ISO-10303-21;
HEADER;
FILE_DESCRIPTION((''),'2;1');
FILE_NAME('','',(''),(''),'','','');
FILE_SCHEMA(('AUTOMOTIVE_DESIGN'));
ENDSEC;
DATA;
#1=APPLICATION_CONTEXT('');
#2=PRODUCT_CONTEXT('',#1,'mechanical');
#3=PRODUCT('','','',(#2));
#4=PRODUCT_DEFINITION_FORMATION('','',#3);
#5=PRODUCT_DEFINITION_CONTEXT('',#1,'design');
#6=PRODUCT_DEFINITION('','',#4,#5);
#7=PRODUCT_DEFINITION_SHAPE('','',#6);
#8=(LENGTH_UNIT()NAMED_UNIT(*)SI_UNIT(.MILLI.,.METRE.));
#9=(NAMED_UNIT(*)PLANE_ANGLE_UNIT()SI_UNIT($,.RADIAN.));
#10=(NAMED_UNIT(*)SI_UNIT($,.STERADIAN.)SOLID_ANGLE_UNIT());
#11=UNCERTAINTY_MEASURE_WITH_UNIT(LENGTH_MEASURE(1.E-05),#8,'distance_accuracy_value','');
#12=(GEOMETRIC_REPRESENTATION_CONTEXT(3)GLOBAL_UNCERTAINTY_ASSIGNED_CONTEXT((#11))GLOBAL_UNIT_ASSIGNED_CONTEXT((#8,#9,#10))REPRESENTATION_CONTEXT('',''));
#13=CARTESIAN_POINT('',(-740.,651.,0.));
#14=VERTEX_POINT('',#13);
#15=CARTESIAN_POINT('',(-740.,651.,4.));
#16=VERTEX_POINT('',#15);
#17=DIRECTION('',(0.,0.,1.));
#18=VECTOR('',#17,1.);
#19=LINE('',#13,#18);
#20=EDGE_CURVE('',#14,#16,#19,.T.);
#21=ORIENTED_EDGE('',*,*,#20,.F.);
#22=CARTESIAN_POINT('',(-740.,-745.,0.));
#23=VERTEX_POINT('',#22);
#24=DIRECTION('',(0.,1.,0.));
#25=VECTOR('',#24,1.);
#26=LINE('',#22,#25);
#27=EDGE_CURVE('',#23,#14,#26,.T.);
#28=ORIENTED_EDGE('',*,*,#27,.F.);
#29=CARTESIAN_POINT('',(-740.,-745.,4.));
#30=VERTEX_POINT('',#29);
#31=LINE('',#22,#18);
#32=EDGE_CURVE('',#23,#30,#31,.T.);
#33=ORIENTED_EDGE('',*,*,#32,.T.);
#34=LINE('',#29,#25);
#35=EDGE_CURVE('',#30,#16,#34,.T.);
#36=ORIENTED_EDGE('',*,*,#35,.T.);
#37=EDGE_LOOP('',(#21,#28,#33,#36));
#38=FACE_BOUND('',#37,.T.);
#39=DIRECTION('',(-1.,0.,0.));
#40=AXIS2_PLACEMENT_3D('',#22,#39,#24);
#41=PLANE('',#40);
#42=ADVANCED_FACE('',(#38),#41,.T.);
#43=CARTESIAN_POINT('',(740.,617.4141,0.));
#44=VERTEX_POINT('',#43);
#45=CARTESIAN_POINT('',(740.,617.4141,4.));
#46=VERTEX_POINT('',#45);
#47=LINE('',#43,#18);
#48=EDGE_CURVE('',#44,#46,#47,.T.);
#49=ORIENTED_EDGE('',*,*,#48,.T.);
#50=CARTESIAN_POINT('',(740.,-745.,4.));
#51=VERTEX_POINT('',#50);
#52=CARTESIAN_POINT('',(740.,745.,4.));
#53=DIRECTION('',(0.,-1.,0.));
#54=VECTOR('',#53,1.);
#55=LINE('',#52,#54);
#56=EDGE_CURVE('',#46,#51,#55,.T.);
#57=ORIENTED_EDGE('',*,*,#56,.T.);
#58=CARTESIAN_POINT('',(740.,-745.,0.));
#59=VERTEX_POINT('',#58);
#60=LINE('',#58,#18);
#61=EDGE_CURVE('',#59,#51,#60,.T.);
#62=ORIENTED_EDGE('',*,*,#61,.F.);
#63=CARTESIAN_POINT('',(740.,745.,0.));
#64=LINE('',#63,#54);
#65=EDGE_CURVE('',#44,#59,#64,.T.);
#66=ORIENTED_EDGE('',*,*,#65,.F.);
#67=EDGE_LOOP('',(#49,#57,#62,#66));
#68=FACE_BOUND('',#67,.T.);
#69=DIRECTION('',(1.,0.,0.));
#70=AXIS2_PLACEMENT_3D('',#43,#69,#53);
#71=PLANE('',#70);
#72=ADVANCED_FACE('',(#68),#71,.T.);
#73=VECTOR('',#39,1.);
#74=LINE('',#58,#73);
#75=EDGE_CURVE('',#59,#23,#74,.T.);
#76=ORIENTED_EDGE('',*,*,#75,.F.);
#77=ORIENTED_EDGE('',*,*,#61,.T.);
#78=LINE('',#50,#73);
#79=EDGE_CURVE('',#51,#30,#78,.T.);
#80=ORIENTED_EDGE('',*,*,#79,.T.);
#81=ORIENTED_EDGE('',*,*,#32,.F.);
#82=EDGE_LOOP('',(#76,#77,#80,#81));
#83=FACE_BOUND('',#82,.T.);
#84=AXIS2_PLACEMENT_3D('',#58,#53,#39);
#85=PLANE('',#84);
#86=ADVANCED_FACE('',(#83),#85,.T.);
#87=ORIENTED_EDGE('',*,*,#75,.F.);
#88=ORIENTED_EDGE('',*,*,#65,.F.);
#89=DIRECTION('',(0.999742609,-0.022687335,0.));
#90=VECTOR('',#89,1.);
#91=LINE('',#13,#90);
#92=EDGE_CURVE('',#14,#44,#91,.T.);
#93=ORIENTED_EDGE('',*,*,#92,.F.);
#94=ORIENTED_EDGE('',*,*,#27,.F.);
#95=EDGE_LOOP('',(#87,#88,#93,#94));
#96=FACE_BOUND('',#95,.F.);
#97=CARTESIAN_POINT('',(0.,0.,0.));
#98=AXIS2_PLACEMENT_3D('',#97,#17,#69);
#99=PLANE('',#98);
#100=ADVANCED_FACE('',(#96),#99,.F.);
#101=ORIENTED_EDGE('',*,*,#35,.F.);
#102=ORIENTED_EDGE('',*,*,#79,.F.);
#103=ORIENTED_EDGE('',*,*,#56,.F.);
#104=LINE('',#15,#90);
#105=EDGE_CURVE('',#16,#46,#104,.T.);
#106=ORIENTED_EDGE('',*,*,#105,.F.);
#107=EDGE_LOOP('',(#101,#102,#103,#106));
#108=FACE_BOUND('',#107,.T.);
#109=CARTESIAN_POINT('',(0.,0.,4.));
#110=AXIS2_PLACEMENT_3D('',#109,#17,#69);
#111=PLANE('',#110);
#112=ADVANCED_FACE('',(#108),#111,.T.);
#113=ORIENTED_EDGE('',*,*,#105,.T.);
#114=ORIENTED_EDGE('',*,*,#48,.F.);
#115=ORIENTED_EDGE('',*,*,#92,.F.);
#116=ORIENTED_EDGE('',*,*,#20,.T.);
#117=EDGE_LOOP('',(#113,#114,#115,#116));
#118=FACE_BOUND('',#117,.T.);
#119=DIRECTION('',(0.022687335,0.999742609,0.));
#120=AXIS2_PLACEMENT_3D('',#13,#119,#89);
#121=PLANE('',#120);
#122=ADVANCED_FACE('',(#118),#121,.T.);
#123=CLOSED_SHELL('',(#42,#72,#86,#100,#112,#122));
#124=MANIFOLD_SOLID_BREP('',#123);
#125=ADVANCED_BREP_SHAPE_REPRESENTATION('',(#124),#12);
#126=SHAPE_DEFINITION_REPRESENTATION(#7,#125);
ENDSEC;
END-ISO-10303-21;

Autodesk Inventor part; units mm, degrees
ref_plane "YZ Plane" through (0, 0, 0) normal (1, 0, 0) x (0, 1, 0)
ref_plane "XZ Plane" through (0, 0, 0) normal (0, 1, 0) x (-1, 0, 0)
ref_plane "XY Plane" through (0, 0, 0) normal (0, 0, 1) x (1, 0, 0)
sketch "Sketch1" plane through (0, 0, 0) normal (0, 0, 1) x (1, 0, 0)
  line L0 (740, -745) -> (-740, -745)
  line L1 (-740, -745) -> (-740, 745)
  line L2 (-740, 745) -> (740, 745)
  line L3 (740, 745) -> (740, -745)
  line L4 (740, -745) -> (-740, 745) construction
  line L5 (-740, -745) -> (740, 745) construction
  line L6 (-740, 651) -> (740, 617.4141)
  point P0 (0, 0)
  dimension "d0" = 1480
  dimension "d1" = 1490
  dimension "d3" = 1.3
  dimension "d6" = 1396
extrude "Plate1" add sketch "Sketch1" along normal blind 4 contours L0 L1 L6 L3
sketch "Sketch2" plane through (0, 0, 0) normal (0, 0, -1) x (-1, 0, 0)
  line L0 (499.781, -578.4604) -> (499.781, -902.2727) construction
  line L1 (499.781, -902.2727) -> (469.8587, -902.2727) construction
  line L2 (469.8587, -902.2727) -> (469.8587, -578.4604) construction
  line L3 (469.8587, -578.4604) -> (499.781, -578.4604) construction
  point P0 (0, 0)
mark "Mark1"
sketch "Эскиз3" plane through (0, 0, 0) normal (0, 0, -1) x (-1, 0, 0)
  line L0 (710, -489.5) -> (770, -489.5) projected
  line L1 (710, -489.5) -> (710, -485.5) projected
  line L2 (710, 7.1667) -> (770, 7.1667) projected
  line L3 (710, 7.1667) -> (710, 11.1667) projected
  line L4 (710, 503.8333) -> (770, 503.8333) projected
  line L5 (710, 503.8333) -> (710, 507.8333) projected
  line L6 (669.8628, -493) -> (669.8628, -590) projected
  line L7 (669.8628, -590) -> (665.8638, -590) projected
  line L8 (169.7342, -493) -> (169.7342, -590) projected
  line L9 (169.7342, -590) -> (165.7352, -590) projected
  line L10 (-330.3944, -493) -> (-330.3944, -590) projected
  line L11 (-330.3944, -590) -> (-334.3934, -590) projected
  line L12 (-738.6395, -489.5) -> (-680, -489.5) projected
  line L13 (-680, -489.5) -> (-680, -485.5) projected
  line L14 (-738.6395, 7.1667) -> (-680, 7.1667) projected
  line L15 (-680, 7.1667) -> (-680, 11.1667) projected
  line L16 (-738.6395, 503.8333) -> (-680, 503.8333) projected
  line L17 (-680, 503.8333) -> (-680, 507.8333) projected
  line L18 (169.7342, 715) -> (169.7342, 511.3333) projected
  line L19 (-330.3944, 715) -> (-330.3944, 511.3333) projected
  point P0 (0, 0)
mark "Маркировка2"
equation "\"d0\" = Лист_ширина"
equation "\"d2\" = Thickness"
equation "\"BendRadius\" = Thickness"
equation "\"BendReliefWidth\" = Thickness"
equation "\"BendReliefDepth\" = 0.5 * Thickness"
equation "\"CornerReliefSize\" = 4 * Thickness"
equation "\"MinimumRemnant\" = 2 * Thickness"
equation "\"TransitionRadius\" = BendRadius"
equation "\"JacobiRadiusSize\" = BendRadius"
equation "\"GapSize\" = Thickness"
equation "\"Лист_ширина\" = 1480"
equation "\"Thickness\" = 4"
properties part number "GBK 2133 shield 3" material "Steel"
